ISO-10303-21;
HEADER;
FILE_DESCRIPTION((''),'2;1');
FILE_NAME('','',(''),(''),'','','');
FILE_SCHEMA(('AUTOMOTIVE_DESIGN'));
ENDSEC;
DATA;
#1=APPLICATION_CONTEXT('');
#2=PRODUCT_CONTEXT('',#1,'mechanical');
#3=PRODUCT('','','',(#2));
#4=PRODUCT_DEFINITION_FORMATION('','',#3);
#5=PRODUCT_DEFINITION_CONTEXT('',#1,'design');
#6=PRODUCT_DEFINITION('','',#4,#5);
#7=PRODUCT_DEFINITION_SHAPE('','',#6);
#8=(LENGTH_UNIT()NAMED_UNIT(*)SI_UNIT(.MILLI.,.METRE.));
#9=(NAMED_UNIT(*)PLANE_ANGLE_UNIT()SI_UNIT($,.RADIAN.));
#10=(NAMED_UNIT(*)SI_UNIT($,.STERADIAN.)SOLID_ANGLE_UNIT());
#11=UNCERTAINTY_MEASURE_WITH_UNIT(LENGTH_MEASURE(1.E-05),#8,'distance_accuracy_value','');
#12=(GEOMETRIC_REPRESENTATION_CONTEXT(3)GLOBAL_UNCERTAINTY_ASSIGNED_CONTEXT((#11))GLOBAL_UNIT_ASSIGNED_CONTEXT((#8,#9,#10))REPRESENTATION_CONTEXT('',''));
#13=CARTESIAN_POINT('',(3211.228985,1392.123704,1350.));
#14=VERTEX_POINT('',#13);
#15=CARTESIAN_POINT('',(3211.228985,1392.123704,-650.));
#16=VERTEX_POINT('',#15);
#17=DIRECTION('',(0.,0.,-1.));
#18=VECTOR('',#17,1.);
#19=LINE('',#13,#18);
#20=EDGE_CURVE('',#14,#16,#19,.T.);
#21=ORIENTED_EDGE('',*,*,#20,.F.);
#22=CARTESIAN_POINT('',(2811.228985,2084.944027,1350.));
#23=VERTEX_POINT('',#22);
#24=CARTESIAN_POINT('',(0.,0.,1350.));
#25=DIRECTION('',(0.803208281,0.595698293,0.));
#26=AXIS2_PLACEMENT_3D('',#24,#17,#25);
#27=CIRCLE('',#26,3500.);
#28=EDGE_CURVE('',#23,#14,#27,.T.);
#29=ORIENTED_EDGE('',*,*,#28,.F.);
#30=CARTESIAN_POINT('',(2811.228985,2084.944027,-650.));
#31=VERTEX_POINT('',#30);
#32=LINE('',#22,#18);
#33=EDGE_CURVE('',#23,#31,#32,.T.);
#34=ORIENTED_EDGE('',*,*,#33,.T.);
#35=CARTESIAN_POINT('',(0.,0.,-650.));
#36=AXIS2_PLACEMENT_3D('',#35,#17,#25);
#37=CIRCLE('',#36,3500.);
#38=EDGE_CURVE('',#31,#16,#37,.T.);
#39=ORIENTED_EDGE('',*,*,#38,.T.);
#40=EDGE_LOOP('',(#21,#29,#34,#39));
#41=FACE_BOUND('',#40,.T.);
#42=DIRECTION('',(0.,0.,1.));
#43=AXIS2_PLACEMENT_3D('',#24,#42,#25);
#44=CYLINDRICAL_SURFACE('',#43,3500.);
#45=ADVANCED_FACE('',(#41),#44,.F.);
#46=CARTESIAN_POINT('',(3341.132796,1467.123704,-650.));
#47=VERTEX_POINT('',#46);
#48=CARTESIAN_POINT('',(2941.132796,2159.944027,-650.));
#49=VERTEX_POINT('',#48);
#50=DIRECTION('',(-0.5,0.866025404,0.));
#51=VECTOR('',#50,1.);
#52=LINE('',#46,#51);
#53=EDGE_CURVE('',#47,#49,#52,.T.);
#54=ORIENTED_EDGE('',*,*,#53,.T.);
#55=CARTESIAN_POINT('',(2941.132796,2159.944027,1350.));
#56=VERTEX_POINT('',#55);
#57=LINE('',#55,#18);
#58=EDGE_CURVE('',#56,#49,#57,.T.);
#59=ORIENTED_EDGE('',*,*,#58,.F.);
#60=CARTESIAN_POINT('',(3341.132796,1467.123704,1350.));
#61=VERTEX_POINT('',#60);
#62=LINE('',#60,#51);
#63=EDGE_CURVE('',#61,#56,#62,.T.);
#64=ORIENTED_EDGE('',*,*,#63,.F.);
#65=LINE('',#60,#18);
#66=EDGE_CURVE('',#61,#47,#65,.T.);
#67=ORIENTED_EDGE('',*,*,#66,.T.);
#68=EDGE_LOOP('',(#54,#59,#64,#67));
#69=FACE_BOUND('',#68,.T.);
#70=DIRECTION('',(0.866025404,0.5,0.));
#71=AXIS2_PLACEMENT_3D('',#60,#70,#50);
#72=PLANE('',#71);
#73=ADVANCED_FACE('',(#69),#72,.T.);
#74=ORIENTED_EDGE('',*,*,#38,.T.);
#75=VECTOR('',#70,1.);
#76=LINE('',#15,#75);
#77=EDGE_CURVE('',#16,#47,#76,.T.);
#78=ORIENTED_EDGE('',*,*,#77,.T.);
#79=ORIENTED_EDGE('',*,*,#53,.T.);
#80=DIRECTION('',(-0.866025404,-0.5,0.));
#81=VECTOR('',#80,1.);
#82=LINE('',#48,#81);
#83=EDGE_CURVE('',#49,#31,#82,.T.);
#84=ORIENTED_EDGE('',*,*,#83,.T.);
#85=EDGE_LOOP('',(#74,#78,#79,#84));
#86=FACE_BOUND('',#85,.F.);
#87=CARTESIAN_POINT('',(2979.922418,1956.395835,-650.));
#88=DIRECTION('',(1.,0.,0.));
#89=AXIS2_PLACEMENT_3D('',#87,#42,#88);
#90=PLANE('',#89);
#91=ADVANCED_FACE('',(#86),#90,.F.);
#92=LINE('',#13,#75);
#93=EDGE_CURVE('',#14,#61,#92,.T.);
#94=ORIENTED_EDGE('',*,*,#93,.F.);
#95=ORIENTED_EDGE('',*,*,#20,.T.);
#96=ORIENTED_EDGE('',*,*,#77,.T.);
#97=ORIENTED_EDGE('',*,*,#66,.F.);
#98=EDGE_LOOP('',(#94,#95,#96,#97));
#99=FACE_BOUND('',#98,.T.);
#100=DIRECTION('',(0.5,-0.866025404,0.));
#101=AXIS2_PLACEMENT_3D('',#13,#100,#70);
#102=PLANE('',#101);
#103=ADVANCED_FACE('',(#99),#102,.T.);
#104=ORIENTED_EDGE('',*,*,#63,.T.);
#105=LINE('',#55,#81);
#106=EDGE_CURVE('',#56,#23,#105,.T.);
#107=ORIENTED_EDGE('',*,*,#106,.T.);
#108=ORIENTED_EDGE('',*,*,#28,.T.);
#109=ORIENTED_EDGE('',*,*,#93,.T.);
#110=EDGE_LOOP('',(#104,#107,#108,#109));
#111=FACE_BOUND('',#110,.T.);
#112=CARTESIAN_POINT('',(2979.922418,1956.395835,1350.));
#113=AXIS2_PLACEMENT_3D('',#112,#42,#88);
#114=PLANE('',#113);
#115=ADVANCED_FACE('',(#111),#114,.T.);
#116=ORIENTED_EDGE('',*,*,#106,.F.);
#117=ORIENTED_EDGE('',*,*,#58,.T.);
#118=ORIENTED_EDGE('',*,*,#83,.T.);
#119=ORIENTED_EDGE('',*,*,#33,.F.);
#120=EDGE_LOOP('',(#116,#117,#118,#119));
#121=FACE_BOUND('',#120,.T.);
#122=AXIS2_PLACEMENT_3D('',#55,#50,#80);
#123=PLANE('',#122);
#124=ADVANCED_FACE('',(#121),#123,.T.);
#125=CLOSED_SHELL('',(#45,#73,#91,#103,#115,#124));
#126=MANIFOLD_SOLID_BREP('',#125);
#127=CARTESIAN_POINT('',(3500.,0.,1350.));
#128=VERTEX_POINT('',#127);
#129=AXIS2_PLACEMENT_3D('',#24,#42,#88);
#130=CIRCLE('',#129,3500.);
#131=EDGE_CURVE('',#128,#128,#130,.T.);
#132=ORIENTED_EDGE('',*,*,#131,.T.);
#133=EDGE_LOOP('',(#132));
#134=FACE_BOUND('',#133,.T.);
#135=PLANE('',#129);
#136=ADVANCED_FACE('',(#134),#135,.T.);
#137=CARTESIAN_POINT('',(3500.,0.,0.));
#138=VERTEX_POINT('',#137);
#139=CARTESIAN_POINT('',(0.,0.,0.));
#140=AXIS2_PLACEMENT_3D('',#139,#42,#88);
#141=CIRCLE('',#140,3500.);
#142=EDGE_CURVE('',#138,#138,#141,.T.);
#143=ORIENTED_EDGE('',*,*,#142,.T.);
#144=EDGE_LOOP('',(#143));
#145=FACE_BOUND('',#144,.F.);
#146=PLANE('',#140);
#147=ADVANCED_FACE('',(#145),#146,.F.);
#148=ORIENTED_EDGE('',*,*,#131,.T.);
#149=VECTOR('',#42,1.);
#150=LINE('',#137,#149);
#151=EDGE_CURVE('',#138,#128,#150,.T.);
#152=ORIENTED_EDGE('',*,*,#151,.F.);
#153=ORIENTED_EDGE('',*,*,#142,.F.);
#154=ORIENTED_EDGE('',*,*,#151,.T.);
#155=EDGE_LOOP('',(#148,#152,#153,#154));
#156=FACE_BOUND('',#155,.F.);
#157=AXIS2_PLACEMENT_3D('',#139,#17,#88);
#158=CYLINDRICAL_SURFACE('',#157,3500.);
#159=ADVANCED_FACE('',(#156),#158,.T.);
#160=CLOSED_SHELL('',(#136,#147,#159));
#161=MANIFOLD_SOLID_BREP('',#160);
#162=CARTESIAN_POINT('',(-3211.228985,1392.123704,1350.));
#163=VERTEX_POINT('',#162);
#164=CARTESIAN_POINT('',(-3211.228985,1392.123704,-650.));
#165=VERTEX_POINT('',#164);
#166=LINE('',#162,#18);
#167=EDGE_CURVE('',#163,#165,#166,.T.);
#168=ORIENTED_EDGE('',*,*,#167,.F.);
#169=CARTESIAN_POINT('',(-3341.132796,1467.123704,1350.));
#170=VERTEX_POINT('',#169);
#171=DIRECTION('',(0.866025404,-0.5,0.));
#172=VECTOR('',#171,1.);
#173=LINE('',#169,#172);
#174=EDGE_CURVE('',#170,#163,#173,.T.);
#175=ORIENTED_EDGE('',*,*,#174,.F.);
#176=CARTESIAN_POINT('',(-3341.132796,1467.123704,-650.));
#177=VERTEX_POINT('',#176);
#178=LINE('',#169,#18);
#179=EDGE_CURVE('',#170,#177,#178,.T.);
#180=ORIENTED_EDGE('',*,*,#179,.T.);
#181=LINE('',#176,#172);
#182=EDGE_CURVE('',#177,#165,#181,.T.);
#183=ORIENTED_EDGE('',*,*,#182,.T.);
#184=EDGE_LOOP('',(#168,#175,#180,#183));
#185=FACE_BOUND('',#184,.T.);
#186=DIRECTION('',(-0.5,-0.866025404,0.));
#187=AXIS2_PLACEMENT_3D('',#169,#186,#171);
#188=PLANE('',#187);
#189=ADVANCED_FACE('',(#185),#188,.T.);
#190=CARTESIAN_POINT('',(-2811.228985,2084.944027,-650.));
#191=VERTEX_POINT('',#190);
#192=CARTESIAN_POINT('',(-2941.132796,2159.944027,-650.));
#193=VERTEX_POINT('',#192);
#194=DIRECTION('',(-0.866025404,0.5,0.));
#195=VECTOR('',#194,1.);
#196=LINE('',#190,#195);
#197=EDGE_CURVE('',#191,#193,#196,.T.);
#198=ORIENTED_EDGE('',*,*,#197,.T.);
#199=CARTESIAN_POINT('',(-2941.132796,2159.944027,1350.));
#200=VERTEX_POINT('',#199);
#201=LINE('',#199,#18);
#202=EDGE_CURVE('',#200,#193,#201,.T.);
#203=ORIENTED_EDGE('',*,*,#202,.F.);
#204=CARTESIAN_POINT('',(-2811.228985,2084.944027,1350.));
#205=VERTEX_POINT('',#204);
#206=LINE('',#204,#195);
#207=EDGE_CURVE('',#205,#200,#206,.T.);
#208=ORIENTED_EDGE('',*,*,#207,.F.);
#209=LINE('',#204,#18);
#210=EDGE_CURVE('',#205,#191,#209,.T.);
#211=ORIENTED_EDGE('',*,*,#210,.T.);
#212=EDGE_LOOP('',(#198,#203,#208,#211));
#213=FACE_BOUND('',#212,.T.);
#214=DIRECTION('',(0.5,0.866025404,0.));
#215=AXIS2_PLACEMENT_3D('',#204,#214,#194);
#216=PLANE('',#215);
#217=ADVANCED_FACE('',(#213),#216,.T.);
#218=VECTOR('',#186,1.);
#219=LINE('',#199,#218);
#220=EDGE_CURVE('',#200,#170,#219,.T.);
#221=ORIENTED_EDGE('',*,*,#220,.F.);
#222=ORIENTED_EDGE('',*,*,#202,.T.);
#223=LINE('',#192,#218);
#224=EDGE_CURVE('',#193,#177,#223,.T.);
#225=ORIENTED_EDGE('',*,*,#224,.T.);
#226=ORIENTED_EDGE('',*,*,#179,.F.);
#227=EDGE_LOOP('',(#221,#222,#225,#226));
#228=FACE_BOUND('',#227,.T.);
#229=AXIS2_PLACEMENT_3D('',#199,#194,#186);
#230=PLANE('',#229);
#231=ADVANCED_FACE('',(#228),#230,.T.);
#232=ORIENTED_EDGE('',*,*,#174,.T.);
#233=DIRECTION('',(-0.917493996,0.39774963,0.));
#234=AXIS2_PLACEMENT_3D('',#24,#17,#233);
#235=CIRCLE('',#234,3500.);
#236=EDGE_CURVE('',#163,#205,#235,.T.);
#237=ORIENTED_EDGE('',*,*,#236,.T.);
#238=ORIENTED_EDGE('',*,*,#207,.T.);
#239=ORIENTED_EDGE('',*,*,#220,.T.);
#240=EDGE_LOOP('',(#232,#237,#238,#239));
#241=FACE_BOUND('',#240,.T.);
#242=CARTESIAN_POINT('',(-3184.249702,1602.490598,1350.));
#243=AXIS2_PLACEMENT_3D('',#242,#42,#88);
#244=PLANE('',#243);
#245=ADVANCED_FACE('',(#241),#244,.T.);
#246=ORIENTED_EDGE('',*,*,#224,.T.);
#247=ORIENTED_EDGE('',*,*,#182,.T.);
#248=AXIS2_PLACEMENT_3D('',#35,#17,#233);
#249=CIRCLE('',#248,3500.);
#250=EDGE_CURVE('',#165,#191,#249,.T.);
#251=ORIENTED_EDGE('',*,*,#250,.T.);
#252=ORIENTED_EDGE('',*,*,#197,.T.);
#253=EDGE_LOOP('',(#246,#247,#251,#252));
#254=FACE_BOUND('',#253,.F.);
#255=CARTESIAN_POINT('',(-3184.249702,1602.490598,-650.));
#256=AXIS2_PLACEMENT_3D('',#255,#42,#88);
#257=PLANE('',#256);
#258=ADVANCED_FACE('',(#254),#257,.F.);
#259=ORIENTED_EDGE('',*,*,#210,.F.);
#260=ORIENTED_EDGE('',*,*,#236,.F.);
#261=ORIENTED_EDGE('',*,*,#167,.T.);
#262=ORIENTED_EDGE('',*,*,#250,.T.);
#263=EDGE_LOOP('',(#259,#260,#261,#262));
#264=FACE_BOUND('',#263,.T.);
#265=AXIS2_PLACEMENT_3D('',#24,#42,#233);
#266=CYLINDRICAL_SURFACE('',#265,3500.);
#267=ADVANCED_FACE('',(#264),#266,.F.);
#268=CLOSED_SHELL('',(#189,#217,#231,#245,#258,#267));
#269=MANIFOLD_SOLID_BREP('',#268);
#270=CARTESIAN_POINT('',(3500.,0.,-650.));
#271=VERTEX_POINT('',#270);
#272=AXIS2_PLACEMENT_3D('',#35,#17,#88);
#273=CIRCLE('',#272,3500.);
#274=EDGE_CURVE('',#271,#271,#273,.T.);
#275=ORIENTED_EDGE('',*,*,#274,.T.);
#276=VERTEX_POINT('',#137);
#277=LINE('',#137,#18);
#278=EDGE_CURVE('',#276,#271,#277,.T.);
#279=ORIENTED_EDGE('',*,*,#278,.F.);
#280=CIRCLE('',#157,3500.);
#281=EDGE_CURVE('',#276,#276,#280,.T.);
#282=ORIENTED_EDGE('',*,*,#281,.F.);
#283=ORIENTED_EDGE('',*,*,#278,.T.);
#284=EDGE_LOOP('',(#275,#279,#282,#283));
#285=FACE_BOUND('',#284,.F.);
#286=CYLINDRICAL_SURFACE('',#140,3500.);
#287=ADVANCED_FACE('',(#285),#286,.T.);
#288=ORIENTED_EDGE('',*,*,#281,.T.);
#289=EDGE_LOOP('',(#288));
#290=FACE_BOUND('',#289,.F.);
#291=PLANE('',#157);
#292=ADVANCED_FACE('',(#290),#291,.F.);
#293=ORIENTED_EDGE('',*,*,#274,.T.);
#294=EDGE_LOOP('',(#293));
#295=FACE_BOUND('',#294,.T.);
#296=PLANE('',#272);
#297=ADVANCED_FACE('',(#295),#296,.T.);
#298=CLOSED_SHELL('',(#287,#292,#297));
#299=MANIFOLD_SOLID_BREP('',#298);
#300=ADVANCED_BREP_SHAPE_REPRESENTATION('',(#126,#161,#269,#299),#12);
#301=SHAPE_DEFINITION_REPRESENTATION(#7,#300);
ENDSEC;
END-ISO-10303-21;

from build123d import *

# Parameters (mm, degrees)
F0_R      = 3500
F1_DEPTH  = 1350
F7_DEPTH  = 2000
F9_R      = 3500
F10_DEPTH = 650


# Not quite as in the source:
# - the program builds the solid bodies; features that only make, move or delete a surface that nothing else refers to are left out


with BuildPart() as f1:
    # F0 (on Top) → F1 (new body)
    with BuildSketch(Plane.XY):
        Circle(F0_R)
    extrude(amount=F1_DEPTH)


with BuildPart() as f7:
    # F6 (on face) → F7 (new body)
    with BuildSketch(Plane.XY.offset(1350)):
        with BuildLine():
            Line((-3341.1327955504, 1467.1237035576), (-3211.2289849827, 1392.1237035576))
            ThreePointArc((-3211.2289849827, 1392.1237035576), (-3126.2840636327, 1573.6416216776), (-3031.0889132455, 1750))
            Line((-3031.0889132455, 1750), (-3141.1327955504, 1813.5338650714))
            Line((-3141.1327955504, 1813.5338650714), (-3341.1327955504, 1467.1237035576))
        make_face()
        with BuildLine():
            Line((-3141.1327955504, 1813.5338650714), (-3031.0889132455, 1750))
            ThreePointArc((-3031.0889132455, 1750), (-2925.9556526417, 1920.6206077136), (-2811.2289849827, 2084.9440265851))
            Line((-2811.2289849827, 2084.9440265851), (-2941.1327955504, 2159.9440265851))
            Line((-2941.1327955504, 2159.9440265851), (-3141.1327955504, 1813.5338650714))
        make_face()
    extrude(amount=-F7_DEPTH)


with BuildPart() as f7b:
    # F6 (on face) → F7, piece 2 (new body)
    with BuildSketch(Plane.XY.offset(1350)):
        with BuildLine():
            ThreePointArc((2811.2289849827, 2084.9440265851), (2925.9556526417, 1920.6206077136), (3031.0889132455, 1750))
            Line((3031.0889132455, 1750), (3141.1327955504, 1813.5338650714))
            Line((3141.1327955504, 1813.5338650714), (2941.1327955504, 2159.9440265851))
            Line((2941.1327955504, 2159.9440265851), (2811.2289849827, 2084.9440265851))
        make_face()
        with BuildLine():
            ThreePointArc((3031.0889132455, 1750), (3126.2840636327, 1573.6416216776), (3211.2289849827, 1392.1237035576))
            Line((3211.2289849827, 1392.1237035576), (3341.1327955504, 1467.1237035576))
            Line((3341.1327955504, 1467.1237035576), (3141.1327955504, 1813.5338650714))
            Line((3141.1327955504, 1813.5338650714), (3031.0889132455, 1750))
        make_face()
    extrude(amount=-F7_DEPTH)


with BuildPart() as f10:
    # F9 (on offset) → F10 (new body)
    with BuildSketch(Plane(origin=(0, 0, 0), x_dir=(1, 0, 0), z_dir=(0, 0, -1))):
        Circle(F9_R)
    extrude(amount=F10_DEPTH)


solid = Compound([f1.part, f7.part, f7b.part, f10.part])
